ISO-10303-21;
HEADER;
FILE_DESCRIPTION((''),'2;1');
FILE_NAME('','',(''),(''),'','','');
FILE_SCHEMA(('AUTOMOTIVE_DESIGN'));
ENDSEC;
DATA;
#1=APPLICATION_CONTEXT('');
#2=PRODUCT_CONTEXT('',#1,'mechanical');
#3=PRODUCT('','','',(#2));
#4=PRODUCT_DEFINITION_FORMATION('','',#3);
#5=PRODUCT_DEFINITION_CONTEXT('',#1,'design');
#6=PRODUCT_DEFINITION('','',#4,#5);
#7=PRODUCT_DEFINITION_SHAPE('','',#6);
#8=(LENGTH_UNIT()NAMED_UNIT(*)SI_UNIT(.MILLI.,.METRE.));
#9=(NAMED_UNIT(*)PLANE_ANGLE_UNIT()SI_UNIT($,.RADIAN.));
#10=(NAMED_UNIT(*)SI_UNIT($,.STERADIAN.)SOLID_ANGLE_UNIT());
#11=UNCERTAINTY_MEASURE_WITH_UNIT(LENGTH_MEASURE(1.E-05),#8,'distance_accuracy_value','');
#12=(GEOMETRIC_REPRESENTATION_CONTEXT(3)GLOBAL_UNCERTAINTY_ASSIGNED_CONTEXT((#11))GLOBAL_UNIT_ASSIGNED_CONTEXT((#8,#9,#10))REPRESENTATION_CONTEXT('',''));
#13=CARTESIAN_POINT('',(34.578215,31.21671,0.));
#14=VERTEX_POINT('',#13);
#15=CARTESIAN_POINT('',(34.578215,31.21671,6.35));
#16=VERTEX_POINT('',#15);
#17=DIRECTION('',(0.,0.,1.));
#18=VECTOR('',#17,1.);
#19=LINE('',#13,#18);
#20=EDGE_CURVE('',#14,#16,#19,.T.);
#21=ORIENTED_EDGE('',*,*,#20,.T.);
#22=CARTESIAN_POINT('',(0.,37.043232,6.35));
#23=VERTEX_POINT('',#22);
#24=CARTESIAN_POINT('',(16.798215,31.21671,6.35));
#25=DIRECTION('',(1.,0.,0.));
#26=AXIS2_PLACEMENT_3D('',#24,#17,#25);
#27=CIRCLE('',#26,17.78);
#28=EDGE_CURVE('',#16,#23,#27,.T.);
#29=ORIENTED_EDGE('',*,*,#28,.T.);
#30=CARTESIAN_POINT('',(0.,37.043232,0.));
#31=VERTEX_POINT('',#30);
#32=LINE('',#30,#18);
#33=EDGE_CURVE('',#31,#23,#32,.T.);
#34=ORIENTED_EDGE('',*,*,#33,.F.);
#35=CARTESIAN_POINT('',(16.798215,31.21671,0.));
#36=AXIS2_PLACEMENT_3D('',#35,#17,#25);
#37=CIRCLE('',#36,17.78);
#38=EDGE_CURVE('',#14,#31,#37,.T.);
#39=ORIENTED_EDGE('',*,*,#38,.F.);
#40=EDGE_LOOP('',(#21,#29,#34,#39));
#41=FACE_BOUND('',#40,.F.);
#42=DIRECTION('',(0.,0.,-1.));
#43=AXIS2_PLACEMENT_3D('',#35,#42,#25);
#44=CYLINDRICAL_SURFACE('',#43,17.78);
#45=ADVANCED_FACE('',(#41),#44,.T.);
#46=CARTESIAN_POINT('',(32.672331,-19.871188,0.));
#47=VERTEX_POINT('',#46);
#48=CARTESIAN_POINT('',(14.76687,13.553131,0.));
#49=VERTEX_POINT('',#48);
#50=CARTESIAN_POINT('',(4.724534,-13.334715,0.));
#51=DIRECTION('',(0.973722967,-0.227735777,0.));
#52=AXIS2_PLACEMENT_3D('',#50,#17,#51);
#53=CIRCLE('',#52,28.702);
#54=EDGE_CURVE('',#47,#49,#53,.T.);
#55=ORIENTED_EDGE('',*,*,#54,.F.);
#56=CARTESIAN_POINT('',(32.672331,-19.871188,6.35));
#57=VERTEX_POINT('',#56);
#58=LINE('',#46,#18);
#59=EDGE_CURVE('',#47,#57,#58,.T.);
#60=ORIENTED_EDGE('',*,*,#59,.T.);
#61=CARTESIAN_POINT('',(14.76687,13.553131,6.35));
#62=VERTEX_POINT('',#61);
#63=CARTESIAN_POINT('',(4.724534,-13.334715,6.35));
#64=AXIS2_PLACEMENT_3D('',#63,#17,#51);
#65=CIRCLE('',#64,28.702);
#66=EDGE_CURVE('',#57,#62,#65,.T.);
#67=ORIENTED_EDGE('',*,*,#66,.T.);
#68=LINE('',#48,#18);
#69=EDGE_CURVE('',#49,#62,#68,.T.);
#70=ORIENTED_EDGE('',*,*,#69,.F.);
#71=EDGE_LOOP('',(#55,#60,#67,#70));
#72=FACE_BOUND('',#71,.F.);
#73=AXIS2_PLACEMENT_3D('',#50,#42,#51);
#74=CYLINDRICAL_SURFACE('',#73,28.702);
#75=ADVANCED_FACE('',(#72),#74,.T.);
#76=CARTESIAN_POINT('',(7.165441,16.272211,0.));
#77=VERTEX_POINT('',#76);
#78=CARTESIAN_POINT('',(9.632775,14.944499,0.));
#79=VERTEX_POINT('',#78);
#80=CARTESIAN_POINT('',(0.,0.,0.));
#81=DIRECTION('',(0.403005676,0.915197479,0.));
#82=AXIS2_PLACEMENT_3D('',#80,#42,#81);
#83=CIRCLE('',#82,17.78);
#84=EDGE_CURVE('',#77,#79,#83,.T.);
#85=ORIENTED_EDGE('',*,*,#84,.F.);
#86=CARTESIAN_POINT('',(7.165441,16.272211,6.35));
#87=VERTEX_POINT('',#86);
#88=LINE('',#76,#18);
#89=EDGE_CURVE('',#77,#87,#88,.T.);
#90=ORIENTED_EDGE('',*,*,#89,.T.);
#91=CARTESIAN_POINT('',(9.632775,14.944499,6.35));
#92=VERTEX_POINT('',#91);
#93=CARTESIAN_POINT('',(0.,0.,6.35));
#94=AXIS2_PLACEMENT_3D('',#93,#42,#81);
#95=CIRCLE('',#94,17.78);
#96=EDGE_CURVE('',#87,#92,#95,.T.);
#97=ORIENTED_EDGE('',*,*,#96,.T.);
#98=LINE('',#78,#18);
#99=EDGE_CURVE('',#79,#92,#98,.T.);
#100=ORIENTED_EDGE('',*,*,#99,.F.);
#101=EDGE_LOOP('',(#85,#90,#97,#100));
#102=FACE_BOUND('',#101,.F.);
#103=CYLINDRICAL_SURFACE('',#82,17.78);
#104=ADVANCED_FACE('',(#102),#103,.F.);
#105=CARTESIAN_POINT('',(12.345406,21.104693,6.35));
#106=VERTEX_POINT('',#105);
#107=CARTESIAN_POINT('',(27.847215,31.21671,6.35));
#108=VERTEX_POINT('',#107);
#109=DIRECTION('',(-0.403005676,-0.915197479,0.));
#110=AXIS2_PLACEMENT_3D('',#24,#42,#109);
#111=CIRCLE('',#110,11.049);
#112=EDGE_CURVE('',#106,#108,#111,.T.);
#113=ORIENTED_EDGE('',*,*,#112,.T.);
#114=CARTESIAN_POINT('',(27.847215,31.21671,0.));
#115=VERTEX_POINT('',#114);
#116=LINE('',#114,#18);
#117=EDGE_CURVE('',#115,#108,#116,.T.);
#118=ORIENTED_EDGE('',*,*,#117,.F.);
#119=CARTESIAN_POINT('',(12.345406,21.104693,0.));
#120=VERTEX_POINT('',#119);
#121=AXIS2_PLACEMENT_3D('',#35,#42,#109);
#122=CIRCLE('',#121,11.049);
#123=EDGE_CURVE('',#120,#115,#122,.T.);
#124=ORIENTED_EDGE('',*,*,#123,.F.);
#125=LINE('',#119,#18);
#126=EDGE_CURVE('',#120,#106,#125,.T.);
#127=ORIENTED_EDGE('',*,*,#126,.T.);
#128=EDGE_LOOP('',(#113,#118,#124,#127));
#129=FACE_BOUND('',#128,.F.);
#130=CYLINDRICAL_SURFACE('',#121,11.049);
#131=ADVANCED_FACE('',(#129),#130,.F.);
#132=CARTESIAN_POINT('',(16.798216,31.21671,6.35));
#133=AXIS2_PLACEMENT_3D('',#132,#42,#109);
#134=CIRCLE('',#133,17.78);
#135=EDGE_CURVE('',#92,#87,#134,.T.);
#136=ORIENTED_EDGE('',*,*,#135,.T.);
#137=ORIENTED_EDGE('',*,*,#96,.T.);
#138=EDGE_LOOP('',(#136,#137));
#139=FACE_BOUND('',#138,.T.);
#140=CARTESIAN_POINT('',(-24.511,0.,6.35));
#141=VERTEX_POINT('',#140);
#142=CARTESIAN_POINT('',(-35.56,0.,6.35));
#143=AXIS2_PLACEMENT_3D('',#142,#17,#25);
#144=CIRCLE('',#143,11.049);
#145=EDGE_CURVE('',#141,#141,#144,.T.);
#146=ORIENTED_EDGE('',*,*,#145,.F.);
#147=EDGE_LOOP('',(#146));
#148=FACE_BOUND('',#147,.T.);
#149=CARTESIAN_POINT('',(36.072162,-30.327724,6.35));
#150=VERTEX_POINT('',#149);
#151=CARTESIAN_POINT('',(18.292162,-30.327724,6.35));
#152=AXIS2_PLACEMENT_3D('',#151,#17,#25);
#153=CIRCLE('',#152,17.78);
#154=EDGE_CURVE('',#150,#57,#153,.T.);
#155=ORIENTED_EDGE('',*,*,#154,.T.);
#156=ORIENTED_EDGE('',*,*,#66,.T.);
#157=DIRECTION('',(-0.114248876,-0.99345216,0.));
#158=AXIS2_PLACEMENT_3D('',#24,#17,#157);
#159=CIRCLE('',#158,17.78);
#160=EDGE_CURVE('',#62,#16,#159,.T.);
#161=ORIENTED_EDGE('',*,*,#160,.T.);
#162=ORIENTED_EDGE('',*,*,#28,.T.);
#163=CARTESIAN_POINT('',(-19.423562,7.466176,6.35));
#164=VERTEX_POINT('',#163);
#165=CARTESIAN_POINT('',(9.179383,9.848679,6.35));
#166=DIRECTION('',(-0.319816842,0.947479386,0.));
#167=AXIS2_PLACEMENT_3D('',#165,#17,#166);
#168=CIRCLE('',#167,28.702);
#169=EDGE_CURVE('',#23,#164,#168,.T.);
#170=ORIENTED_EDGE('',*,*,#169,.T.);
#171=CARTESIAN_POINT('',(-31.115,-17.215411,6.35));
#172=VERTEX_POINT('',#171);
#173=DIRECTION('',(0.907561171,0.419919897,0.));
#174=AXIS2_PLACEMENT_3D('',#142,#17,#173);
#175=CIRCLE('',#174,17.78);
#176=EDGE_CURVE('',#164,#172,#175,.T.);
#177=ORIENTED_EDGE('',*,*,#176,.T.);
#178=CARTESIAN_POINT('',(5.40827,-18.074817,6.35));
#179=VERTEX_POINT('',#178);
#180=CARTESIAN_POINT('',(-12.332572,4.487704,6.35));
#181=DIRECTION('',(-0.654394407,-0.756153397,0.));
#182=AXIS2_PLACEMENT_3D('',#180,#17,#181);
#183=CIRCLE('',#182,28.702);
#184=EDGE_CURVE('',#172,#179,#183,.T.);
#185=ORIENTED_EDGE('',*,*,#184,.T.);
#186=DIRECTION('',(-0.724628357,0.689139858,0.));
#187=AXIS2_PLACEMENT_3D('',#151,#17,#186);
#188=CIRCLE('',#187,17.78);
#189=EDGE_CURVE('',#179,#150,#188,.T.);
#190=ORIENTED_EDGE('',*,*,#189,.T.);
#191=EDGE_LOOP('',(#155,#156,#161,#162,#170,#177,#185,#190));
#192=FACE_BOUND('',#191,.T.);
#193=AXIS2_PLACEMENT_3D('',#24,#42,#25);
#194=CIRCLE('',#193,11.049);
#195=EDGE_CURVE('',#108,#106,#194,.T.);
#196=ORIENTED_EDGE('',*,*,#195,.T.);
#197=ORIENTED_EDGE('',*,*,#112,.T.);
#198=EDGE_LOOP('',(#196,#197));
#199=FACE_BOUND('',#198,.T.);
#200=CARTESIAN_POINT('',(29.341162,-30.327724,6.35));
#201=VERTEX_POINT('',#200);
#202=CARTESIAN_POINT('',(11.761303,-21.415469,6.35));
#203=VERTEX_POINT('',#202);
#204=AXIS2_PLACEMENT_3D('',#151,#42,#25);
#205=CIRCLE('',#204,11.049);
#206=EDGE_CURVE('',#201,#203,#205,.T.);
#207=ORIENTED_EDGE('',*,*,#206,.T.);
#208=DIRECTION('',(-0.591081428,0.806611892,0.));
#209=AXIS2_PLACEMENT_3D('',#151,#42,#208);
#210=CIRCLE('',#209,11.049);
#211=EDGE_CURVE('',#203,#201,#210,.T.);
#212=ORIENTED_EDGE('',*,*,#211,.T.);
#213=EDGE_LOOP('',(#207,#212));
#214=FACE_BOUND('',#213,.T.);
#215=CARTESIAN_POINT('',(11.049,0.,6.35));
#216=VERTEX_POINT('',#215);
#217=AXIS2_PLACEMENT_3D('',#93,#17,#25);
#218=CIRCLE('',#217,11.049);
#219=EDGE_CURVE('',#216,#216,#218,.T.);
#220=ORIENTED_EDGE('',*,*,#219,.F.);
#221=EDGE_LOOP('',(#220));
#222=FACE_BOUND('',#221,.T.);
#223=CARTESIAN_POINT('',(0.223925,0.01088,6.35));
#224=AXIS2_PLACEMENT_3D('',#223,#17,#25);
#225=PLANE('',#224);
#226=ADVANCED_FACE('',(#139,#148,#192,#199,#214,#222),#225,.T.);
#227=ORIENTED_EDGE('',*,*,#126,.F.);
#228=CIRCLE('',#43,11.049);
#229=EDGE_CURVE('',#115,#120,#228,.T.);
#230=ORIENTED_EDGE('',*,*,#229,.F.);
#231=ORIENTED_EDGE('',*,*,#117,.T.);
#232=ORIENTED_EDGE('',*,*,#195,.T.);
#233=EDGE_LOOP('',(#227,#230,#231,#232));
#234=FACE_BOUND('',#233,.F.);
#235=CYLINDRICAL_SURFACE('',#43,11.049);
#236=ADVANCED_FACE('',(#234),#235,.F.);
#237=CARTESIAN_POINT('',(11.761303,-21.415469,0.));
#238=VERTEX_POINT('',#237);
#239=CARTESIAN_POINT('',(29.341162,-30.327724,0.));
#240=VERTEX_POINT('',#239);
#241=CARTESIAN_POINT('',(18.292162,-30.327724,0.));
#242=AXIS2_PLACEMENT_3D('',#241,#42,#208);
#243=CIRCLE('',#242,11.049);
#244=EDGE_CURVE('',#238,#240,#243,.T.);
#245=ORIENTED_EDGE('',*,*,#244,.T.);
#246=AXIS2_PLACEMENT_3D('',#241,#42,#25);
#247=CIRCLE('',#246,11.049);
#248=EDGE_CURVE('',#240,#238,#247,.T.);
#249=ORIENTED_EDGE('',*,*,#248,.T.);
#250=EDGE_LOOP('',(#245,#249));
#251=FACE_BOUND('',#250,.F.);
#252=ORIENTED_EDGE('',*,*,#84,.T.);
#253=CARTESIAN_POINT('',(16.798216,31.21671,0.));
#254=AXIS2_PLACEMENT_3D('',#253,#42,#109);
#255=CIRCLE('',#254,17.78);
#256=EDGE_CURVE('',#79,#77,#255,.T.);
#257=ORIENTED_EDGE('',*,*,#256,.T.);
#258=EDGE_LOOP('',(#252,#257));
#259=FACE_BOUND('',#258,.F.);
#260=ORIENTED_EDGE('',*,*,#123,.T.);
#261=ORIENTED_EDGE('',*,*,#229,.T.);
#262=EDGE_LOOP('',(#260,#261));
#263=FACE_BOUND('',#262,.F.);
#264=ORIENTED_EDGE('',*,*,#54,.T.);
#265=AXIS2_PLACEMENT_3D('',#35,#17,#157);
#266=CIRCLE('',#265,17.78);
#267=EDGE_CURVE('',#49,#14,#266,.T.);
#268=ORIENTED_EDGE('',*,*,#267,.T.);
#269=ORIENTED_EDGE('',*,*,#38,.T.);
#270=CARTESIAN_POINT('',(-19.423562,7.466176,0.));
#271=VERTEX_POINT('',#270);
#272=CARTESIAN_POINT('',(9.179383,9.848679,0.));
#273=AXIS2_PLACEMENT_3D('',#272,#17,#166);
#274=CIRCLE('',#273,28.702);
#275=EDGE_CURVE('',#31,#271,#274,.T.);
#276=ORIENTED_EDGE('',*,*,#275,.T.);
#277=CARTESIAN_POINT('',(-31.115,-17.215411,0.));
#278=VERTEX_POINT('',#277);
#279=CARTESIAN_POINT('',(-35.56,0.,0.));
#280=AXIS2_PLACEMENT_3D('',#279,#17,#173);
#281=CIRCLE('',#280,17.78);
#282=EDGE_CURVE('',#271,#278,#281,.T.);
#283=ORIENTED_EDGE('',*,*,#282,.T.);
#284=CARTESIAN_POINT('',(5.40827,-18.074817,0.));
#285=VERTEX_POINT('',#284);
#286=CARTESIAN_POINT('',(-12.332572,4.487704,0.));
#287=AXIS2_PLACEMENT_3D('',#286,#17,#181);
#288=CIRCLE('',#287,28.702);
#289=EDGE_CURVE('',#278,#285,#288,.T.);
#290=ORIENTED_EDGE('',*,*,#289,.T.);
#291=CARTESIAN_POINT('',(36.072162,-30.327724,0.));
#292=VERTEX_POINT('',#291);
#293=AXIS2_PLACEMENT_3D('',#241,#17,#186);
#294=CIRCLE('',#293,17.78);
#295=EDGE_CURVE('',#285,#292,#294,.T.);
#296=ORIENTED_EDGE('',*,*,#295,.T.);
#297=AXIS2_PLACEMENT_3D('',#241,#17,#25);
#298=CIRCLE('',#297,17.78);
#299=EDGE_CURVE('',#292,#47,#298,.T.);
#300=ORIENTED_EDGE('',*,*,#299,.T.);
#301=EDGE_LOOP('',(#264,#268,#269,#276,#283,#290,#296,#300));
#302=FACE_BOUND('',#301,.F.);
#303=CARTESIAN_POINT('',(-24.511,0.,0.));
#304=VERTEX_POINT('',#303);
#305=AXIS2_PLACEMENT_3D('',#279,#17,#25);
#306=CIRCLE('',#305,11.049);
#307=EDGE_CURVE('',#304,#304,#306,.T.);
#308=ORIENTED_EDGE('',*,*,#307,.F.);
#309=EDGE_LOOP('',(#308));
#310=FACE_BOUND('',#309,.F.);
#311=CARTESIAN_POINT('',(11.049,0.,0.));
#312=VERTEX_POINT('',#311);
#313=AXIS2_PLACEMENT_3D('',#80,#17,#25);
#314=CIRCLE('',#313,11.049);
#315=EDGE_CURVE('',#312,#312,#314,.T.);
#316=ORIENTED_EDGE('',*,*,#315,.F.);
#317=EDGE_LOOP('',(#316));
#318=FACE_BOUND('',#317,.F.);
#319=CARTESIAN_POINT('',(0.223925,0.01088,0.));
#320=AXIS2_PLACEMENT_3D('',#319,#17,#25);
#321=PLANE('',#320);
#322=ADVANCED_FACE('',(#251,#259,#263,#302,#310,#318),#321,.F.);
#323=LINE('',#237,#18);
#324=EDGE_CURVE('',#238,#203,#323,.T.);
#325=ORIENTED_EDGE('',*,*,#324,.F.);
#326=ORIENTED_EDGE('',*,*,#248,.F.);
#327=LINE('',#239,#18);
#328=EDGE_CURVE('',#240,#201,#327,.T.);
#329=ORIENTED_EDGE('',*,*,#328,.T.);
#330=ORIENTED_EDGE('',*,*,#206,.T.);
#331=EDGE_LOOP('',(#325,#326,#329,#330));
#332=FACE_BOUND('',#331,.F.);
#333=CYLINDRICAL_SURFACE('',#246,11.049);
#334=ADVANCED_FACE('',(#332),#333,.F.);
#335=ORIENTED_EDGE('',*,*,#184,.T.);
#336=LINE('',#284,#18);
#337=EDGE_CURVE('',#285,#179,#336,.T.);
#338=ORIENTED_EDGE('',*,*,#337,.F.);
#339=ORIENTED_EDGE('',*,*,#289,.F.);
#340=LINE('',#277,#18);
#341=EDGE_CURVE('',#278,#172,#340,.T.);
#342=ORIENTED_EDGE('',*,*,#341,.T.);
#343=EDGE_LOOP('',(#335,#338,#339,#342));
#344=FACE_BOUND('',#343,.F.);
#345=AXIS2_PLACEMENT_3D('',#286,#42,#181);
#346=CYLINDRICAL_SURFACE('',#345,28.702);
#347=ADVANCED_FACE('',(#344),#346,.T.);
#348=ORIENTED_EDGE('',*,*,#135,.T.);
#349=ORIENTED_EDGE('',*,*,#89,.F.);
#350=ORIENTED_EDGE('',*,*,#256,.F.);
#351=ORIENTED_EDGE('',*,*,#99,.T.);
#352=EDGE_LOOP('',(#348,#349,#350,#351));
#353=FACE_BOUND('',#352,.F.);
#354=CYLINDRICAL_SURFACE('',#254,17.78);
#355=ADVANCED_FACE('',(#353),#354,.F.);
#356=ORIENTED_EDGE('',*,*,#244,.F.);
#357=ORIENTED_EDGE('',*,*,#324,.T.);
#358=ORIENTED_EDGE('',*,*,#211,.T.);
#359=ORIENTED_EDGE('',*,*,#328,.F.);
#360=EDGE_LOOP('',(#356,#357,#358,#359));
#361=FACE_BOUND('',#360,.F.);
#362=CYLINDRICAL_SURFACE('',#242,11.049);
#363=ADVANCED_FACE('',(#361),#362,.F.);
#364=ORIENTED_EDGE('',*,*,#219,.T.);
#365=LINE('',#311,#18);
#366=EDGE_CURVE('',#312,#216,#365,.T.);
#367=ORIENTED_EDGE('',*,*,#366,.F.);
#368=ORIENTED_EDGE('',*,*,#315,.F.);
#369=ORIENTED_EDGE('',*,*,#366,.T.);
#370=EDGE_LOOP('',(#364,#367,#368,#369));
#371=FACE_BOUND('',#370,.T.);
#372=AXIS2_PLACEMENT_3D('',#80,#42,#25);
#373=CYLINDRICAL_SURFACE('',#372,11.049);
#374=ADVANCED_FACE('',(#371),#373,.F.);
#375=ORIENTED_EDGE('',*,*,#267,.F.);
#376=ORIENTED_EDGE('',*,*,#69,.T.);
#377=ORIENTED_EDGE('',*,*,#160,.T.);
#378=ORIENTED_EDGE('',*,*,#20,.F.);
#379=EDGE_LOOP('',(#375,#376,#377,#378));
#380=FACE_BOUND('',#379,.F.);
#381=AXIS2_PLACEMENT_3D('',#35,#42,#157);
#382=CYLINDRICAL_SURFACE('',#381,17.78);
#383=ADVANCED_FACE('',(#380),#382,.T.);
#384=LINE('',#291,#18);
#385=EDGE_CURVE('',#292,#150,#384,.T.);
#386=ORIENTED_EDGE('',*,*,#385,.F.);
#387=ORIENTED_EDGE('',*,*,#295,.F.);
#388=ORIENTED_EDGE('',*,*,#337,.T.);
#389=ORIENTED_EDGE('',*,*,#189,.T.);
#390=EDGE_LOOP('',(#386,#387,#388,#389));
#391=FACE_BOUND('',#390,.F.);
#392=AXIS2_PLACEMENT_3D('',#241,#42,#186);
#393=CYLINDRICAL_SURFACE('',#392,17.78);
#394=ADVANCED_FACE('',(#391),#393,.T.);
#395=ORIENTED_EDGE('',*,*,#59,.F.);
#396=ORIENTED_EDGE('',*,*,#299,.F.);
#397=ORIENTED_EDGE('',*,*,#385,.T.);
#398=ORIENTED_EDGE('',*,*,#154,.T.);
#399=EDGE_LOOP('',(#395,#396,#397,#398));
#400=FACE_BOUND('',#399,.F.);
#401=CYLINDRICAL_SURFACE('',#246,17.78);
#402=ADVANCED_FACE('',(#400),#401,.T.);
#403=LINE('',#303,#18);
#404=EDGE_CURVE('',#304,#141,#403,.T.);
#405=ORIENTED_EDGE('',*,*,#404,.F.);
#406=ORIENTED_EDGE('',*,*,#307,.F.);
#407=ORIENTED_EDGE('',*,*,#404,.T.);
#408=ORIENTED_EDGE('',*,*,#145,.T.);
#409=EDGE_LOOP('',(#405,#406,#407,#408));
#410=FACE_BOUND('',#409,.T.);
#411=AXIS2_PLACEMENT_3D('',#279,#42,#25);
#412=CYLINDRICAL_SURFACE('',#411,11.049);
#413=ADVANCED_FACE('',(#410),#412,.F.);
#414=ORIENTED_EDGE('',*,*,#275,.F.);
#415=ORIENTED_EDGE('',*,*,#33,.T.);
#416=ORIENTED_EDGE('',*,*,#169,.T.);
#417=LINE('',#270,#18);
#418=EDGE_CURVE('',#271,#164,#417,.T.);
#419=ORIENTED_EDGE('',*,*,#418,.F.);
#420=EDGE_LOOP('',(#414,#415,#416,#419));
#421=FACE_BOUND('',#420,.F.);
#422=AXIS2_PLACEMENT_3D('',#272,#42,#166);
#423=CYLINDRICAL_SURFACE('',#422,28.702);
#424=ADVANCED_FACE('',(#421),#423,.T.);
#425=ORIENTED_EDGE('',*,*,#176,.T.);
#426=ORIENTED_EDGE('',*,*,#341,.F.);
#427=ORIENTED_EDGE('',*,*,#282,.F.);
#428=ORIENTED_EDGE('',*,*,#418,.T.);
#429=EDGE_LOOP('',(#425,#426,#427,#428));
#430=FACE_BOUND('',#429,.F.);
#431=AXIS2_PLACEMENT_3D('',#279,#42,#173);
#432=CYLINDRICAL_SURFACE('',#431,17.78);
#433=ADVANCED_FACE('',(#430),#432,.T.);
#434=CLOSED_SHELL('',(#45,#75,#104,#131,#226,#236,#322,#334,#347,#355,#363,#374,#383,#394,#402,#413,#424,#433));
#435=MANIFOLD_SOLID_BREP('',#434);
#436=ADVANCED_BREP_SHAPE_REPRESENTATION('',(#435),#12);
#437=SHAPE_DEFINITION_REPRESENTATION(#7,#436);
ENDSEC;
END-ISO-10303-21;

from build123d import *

# Parameters (mm, degrees)
F0_R     = 11.049
F1_DEPTH = 6.35


with BuildPart() as f1:
    # F0 (on Top) → F1 (new body)
    with BuildSketch(Plane.XY):
        with BuildLine():
            ThreePointArc((10.5094277958, -14.3415594481), (15.8585312405, -8.0396136036), (17.78, 0))
            ThreePointArc((17.78, 0), (15.6108797336, 8.5105131421), (9.6327745846, 14.9444991151))
            ThreePointArc((9.6327745846, 14.9444991151), (8.3729133787, 15.5596772314), (7.1654409141, 16.2722111745))
            ThreePointArc((7.1654409141, 16.2722111745), (-9.7140841192, 14.8917752376), (-17.78, 0))
            ThreePointArc((-17.78, 0), (-9.4273906442, -15.0749031719), (7.7827340428, -15.986164356))
            ThreePointArc((7.7827340428, -15.986164356), (9.1091896886, -15.102697614), (10.5094277958, -14.3415594481))
        make_face()
        Circle(F0_R, mode=Mode.SUBTRACT)
        with BuildLine():
            ThreePointArc((9.6327745846, 14.9444991151), (15.6108797336, 8.5105131421), (17.78, 0))
            ThreePointArc((17.78, 0), (15.8585312405, -8.0396136036), (10.5094277958, -14.3415594481))
            ThreePointArc((10.5094277958, -14.3415594481), (22.5963149024, -13.0765595999), (32.6723306155, -19.8711877644))
            ThreePointArc((32.6723306155, -19.8711877644), (30.024905988, 0.2187336146), (14.766870478, 13.5531308843))
            ThreePointArc((14.766870478, 13.5531308843), (12.1474957403, 14.0557311296), (9.6327745846, 14.9444991151))
        make_face()
        with BuildLine():
            ThreePointArc((14.766870478, 13.5531308843), (12.2321244934, 14.3680080122), (9.6327745846, 14.9444991151))
            ThreePointArc((9.6327745846, 14.9444991151), (12.1474957403, 14.0557311296), (14.766870478, 13.5531308843))
        make_face()
        with BuildLine():
            ThreePointArc((7.1654409141, 16.2722111745), (8.42530212, 15.6570330582), (9.6327745846, 14.9444991151))
            ThreePointArc((9.6327745846, 14.9444991151), (12.2321244934, 14.3680080122), (14.766870478, 13.5531308843))
            ThreePointArc((14.766870478, 13.5531308843), (28.6306092872, 17.9455815797), (34.5782154987, 31.2167102896))
            ThreePointArc((34.5782154987, 31.2167102896), (19.7525452394, 48.7495462206), (0, 37.0432320702))
            ThreePointArc((0, 37.0432320702), (-0.0097628586, 25.4184119581), (7.1654409141, 16.2722111745))
        make_face()
        with BuildLine():
            ThreePointArc((27.8472154987, 31.2167102896), (22.8348249156, 21.9625356777), (12.3454057878, 21.1046933455))
            ThreePointArc((12.3454057878, 21.1046933455), (10.7616060818, 40.4708849015), (27.8472154987, 31.2167102896))
        make_face(mode=Mode.SUBTRACT)
        with BuildLine():
            ThreePointArc((32.6723306155, -19.8711877644), (22.5963149024, -13.0765595999), (10.5094277958, -14.3415594481))
            ThreePointArc((10.5094277958, -14.3415594481), (9.1829721501, -15.2250261902), (7.7827340428, -15.986164356))
            ThreePointArc((7.7827340428, -15.986164356), (6.6242894769, -17.0632176818), (5.4082696447, -18.0748171313))
            ThreePointArc((5.4082696447, -18.0748171313), (11.6947079059, -46.8383870739), (36.0721618387, -30.3277238042))
            ThreePointArc((36.0721618387, -30.3277238042), (35.2008548818, -24.8300425135), (32.6723306155, -19.8711877644))
        make_face()
        with BuildLine():
            ThreePointArc((29.3411618387, -30.3277238042), (13.2961162421, -40.1826682179), (11.761303137, -21.4154690043))
            ThreePointArc((11.761303137, -21.4154690043), (23.2882074352, -20.4727793905), (29.3411618387, -30.3277238042))
        make_face(mode=Mode.SUBTRACT)
        with BuildLine():
            ThreePointArc((7.7827340428, -15.986164356), (9.1829721501, -15.2250261902), (10.5094277958, -14.3415594481))
            ThreePointArc((10.5094277958, -14.3415594481), (9.1091896886, -15.102697614), (7.7827340428, -15.986164356))
        make_face()
        with BuildLine():
            ThreePointArc((-17.78, 0), (-9.7140841192, 14.8917752376), (7.1654409141, 16.2722111745))
            ThreePointArc((7.1654409141, 16.2722111745), (-0.0097628586, 25.4184119581), (0, 37.0432320702))
            ThreePointArc((0, 37.0432320702), (-14.8117955692, 25.6039367366), (-19.4235623734, 7.4661757763))
            ThreePointArc((-19.4235623734, 7.4661757763), (-18.1957513695, 3.8224690318), (-17.78, 0))
        make_face()
        with BuildLine():
            ThreePointArc((5.4082696447, -18.0748171313), (6.5489734879, -16.9775954393), (7.7827340428, -15.986164356))
            ThreePointArc((7.7827340428, -15.986164356), (-9.4273906442, -15.0749031719), (-17.78, 0))
            ThreePointArc((-17.78, 0), (-21.5036758006, -10.8879819067), (-31.115, -17.2154109739))
            ThreePointArc((-31.115, -17.2154109739), (-13.0077535924, -24.206353637), (5.4082696447, -18.0748171313))
        make_face()
        with BuildLine():
            ThreePointArc((5.4082696447, -18.0748171313), (6.6242894769, -17.0632176818), (7.7827340428, -15.986164356))
            ThreePointArc((7.7827340428, -15.986164356), (6.5489734879, -16.9775954393), (5.4082696447, -18.0748171313))
        make_face()
        with BuildLine():
            ThreePointArc((-19.4235623734, 7.4661757763), (-18.851475509, 3.67812157), (-17.78, 0))
            ThreePointArc((-17.78, 0), (-18.1957513695, 3.8224690318), (-19.4235623734, 7.4661757763))
        make_face()
        with BuildLine():
            ThreePointArc((-31.115, -17.2154109739), (-21.5036758006, -10.8879819067), (-17.78, 0))
            ThreePointArc((-17.78, 0), (-18.851475509, 3.67812157), (-19.4235623734, 7.4661757763))
            ThreePointArc((-19.4235623734, 7.4661757763), (-51.6284185538, 7.6114601214), (-31.115, -17.2154109739))
        make_face()
        with Locations((-35.56, 0)):
            Circle(F0_R, mode=Mode.SUBTRACT)
    extrude(amount=F1_DEPTH)


solid = f1.part
